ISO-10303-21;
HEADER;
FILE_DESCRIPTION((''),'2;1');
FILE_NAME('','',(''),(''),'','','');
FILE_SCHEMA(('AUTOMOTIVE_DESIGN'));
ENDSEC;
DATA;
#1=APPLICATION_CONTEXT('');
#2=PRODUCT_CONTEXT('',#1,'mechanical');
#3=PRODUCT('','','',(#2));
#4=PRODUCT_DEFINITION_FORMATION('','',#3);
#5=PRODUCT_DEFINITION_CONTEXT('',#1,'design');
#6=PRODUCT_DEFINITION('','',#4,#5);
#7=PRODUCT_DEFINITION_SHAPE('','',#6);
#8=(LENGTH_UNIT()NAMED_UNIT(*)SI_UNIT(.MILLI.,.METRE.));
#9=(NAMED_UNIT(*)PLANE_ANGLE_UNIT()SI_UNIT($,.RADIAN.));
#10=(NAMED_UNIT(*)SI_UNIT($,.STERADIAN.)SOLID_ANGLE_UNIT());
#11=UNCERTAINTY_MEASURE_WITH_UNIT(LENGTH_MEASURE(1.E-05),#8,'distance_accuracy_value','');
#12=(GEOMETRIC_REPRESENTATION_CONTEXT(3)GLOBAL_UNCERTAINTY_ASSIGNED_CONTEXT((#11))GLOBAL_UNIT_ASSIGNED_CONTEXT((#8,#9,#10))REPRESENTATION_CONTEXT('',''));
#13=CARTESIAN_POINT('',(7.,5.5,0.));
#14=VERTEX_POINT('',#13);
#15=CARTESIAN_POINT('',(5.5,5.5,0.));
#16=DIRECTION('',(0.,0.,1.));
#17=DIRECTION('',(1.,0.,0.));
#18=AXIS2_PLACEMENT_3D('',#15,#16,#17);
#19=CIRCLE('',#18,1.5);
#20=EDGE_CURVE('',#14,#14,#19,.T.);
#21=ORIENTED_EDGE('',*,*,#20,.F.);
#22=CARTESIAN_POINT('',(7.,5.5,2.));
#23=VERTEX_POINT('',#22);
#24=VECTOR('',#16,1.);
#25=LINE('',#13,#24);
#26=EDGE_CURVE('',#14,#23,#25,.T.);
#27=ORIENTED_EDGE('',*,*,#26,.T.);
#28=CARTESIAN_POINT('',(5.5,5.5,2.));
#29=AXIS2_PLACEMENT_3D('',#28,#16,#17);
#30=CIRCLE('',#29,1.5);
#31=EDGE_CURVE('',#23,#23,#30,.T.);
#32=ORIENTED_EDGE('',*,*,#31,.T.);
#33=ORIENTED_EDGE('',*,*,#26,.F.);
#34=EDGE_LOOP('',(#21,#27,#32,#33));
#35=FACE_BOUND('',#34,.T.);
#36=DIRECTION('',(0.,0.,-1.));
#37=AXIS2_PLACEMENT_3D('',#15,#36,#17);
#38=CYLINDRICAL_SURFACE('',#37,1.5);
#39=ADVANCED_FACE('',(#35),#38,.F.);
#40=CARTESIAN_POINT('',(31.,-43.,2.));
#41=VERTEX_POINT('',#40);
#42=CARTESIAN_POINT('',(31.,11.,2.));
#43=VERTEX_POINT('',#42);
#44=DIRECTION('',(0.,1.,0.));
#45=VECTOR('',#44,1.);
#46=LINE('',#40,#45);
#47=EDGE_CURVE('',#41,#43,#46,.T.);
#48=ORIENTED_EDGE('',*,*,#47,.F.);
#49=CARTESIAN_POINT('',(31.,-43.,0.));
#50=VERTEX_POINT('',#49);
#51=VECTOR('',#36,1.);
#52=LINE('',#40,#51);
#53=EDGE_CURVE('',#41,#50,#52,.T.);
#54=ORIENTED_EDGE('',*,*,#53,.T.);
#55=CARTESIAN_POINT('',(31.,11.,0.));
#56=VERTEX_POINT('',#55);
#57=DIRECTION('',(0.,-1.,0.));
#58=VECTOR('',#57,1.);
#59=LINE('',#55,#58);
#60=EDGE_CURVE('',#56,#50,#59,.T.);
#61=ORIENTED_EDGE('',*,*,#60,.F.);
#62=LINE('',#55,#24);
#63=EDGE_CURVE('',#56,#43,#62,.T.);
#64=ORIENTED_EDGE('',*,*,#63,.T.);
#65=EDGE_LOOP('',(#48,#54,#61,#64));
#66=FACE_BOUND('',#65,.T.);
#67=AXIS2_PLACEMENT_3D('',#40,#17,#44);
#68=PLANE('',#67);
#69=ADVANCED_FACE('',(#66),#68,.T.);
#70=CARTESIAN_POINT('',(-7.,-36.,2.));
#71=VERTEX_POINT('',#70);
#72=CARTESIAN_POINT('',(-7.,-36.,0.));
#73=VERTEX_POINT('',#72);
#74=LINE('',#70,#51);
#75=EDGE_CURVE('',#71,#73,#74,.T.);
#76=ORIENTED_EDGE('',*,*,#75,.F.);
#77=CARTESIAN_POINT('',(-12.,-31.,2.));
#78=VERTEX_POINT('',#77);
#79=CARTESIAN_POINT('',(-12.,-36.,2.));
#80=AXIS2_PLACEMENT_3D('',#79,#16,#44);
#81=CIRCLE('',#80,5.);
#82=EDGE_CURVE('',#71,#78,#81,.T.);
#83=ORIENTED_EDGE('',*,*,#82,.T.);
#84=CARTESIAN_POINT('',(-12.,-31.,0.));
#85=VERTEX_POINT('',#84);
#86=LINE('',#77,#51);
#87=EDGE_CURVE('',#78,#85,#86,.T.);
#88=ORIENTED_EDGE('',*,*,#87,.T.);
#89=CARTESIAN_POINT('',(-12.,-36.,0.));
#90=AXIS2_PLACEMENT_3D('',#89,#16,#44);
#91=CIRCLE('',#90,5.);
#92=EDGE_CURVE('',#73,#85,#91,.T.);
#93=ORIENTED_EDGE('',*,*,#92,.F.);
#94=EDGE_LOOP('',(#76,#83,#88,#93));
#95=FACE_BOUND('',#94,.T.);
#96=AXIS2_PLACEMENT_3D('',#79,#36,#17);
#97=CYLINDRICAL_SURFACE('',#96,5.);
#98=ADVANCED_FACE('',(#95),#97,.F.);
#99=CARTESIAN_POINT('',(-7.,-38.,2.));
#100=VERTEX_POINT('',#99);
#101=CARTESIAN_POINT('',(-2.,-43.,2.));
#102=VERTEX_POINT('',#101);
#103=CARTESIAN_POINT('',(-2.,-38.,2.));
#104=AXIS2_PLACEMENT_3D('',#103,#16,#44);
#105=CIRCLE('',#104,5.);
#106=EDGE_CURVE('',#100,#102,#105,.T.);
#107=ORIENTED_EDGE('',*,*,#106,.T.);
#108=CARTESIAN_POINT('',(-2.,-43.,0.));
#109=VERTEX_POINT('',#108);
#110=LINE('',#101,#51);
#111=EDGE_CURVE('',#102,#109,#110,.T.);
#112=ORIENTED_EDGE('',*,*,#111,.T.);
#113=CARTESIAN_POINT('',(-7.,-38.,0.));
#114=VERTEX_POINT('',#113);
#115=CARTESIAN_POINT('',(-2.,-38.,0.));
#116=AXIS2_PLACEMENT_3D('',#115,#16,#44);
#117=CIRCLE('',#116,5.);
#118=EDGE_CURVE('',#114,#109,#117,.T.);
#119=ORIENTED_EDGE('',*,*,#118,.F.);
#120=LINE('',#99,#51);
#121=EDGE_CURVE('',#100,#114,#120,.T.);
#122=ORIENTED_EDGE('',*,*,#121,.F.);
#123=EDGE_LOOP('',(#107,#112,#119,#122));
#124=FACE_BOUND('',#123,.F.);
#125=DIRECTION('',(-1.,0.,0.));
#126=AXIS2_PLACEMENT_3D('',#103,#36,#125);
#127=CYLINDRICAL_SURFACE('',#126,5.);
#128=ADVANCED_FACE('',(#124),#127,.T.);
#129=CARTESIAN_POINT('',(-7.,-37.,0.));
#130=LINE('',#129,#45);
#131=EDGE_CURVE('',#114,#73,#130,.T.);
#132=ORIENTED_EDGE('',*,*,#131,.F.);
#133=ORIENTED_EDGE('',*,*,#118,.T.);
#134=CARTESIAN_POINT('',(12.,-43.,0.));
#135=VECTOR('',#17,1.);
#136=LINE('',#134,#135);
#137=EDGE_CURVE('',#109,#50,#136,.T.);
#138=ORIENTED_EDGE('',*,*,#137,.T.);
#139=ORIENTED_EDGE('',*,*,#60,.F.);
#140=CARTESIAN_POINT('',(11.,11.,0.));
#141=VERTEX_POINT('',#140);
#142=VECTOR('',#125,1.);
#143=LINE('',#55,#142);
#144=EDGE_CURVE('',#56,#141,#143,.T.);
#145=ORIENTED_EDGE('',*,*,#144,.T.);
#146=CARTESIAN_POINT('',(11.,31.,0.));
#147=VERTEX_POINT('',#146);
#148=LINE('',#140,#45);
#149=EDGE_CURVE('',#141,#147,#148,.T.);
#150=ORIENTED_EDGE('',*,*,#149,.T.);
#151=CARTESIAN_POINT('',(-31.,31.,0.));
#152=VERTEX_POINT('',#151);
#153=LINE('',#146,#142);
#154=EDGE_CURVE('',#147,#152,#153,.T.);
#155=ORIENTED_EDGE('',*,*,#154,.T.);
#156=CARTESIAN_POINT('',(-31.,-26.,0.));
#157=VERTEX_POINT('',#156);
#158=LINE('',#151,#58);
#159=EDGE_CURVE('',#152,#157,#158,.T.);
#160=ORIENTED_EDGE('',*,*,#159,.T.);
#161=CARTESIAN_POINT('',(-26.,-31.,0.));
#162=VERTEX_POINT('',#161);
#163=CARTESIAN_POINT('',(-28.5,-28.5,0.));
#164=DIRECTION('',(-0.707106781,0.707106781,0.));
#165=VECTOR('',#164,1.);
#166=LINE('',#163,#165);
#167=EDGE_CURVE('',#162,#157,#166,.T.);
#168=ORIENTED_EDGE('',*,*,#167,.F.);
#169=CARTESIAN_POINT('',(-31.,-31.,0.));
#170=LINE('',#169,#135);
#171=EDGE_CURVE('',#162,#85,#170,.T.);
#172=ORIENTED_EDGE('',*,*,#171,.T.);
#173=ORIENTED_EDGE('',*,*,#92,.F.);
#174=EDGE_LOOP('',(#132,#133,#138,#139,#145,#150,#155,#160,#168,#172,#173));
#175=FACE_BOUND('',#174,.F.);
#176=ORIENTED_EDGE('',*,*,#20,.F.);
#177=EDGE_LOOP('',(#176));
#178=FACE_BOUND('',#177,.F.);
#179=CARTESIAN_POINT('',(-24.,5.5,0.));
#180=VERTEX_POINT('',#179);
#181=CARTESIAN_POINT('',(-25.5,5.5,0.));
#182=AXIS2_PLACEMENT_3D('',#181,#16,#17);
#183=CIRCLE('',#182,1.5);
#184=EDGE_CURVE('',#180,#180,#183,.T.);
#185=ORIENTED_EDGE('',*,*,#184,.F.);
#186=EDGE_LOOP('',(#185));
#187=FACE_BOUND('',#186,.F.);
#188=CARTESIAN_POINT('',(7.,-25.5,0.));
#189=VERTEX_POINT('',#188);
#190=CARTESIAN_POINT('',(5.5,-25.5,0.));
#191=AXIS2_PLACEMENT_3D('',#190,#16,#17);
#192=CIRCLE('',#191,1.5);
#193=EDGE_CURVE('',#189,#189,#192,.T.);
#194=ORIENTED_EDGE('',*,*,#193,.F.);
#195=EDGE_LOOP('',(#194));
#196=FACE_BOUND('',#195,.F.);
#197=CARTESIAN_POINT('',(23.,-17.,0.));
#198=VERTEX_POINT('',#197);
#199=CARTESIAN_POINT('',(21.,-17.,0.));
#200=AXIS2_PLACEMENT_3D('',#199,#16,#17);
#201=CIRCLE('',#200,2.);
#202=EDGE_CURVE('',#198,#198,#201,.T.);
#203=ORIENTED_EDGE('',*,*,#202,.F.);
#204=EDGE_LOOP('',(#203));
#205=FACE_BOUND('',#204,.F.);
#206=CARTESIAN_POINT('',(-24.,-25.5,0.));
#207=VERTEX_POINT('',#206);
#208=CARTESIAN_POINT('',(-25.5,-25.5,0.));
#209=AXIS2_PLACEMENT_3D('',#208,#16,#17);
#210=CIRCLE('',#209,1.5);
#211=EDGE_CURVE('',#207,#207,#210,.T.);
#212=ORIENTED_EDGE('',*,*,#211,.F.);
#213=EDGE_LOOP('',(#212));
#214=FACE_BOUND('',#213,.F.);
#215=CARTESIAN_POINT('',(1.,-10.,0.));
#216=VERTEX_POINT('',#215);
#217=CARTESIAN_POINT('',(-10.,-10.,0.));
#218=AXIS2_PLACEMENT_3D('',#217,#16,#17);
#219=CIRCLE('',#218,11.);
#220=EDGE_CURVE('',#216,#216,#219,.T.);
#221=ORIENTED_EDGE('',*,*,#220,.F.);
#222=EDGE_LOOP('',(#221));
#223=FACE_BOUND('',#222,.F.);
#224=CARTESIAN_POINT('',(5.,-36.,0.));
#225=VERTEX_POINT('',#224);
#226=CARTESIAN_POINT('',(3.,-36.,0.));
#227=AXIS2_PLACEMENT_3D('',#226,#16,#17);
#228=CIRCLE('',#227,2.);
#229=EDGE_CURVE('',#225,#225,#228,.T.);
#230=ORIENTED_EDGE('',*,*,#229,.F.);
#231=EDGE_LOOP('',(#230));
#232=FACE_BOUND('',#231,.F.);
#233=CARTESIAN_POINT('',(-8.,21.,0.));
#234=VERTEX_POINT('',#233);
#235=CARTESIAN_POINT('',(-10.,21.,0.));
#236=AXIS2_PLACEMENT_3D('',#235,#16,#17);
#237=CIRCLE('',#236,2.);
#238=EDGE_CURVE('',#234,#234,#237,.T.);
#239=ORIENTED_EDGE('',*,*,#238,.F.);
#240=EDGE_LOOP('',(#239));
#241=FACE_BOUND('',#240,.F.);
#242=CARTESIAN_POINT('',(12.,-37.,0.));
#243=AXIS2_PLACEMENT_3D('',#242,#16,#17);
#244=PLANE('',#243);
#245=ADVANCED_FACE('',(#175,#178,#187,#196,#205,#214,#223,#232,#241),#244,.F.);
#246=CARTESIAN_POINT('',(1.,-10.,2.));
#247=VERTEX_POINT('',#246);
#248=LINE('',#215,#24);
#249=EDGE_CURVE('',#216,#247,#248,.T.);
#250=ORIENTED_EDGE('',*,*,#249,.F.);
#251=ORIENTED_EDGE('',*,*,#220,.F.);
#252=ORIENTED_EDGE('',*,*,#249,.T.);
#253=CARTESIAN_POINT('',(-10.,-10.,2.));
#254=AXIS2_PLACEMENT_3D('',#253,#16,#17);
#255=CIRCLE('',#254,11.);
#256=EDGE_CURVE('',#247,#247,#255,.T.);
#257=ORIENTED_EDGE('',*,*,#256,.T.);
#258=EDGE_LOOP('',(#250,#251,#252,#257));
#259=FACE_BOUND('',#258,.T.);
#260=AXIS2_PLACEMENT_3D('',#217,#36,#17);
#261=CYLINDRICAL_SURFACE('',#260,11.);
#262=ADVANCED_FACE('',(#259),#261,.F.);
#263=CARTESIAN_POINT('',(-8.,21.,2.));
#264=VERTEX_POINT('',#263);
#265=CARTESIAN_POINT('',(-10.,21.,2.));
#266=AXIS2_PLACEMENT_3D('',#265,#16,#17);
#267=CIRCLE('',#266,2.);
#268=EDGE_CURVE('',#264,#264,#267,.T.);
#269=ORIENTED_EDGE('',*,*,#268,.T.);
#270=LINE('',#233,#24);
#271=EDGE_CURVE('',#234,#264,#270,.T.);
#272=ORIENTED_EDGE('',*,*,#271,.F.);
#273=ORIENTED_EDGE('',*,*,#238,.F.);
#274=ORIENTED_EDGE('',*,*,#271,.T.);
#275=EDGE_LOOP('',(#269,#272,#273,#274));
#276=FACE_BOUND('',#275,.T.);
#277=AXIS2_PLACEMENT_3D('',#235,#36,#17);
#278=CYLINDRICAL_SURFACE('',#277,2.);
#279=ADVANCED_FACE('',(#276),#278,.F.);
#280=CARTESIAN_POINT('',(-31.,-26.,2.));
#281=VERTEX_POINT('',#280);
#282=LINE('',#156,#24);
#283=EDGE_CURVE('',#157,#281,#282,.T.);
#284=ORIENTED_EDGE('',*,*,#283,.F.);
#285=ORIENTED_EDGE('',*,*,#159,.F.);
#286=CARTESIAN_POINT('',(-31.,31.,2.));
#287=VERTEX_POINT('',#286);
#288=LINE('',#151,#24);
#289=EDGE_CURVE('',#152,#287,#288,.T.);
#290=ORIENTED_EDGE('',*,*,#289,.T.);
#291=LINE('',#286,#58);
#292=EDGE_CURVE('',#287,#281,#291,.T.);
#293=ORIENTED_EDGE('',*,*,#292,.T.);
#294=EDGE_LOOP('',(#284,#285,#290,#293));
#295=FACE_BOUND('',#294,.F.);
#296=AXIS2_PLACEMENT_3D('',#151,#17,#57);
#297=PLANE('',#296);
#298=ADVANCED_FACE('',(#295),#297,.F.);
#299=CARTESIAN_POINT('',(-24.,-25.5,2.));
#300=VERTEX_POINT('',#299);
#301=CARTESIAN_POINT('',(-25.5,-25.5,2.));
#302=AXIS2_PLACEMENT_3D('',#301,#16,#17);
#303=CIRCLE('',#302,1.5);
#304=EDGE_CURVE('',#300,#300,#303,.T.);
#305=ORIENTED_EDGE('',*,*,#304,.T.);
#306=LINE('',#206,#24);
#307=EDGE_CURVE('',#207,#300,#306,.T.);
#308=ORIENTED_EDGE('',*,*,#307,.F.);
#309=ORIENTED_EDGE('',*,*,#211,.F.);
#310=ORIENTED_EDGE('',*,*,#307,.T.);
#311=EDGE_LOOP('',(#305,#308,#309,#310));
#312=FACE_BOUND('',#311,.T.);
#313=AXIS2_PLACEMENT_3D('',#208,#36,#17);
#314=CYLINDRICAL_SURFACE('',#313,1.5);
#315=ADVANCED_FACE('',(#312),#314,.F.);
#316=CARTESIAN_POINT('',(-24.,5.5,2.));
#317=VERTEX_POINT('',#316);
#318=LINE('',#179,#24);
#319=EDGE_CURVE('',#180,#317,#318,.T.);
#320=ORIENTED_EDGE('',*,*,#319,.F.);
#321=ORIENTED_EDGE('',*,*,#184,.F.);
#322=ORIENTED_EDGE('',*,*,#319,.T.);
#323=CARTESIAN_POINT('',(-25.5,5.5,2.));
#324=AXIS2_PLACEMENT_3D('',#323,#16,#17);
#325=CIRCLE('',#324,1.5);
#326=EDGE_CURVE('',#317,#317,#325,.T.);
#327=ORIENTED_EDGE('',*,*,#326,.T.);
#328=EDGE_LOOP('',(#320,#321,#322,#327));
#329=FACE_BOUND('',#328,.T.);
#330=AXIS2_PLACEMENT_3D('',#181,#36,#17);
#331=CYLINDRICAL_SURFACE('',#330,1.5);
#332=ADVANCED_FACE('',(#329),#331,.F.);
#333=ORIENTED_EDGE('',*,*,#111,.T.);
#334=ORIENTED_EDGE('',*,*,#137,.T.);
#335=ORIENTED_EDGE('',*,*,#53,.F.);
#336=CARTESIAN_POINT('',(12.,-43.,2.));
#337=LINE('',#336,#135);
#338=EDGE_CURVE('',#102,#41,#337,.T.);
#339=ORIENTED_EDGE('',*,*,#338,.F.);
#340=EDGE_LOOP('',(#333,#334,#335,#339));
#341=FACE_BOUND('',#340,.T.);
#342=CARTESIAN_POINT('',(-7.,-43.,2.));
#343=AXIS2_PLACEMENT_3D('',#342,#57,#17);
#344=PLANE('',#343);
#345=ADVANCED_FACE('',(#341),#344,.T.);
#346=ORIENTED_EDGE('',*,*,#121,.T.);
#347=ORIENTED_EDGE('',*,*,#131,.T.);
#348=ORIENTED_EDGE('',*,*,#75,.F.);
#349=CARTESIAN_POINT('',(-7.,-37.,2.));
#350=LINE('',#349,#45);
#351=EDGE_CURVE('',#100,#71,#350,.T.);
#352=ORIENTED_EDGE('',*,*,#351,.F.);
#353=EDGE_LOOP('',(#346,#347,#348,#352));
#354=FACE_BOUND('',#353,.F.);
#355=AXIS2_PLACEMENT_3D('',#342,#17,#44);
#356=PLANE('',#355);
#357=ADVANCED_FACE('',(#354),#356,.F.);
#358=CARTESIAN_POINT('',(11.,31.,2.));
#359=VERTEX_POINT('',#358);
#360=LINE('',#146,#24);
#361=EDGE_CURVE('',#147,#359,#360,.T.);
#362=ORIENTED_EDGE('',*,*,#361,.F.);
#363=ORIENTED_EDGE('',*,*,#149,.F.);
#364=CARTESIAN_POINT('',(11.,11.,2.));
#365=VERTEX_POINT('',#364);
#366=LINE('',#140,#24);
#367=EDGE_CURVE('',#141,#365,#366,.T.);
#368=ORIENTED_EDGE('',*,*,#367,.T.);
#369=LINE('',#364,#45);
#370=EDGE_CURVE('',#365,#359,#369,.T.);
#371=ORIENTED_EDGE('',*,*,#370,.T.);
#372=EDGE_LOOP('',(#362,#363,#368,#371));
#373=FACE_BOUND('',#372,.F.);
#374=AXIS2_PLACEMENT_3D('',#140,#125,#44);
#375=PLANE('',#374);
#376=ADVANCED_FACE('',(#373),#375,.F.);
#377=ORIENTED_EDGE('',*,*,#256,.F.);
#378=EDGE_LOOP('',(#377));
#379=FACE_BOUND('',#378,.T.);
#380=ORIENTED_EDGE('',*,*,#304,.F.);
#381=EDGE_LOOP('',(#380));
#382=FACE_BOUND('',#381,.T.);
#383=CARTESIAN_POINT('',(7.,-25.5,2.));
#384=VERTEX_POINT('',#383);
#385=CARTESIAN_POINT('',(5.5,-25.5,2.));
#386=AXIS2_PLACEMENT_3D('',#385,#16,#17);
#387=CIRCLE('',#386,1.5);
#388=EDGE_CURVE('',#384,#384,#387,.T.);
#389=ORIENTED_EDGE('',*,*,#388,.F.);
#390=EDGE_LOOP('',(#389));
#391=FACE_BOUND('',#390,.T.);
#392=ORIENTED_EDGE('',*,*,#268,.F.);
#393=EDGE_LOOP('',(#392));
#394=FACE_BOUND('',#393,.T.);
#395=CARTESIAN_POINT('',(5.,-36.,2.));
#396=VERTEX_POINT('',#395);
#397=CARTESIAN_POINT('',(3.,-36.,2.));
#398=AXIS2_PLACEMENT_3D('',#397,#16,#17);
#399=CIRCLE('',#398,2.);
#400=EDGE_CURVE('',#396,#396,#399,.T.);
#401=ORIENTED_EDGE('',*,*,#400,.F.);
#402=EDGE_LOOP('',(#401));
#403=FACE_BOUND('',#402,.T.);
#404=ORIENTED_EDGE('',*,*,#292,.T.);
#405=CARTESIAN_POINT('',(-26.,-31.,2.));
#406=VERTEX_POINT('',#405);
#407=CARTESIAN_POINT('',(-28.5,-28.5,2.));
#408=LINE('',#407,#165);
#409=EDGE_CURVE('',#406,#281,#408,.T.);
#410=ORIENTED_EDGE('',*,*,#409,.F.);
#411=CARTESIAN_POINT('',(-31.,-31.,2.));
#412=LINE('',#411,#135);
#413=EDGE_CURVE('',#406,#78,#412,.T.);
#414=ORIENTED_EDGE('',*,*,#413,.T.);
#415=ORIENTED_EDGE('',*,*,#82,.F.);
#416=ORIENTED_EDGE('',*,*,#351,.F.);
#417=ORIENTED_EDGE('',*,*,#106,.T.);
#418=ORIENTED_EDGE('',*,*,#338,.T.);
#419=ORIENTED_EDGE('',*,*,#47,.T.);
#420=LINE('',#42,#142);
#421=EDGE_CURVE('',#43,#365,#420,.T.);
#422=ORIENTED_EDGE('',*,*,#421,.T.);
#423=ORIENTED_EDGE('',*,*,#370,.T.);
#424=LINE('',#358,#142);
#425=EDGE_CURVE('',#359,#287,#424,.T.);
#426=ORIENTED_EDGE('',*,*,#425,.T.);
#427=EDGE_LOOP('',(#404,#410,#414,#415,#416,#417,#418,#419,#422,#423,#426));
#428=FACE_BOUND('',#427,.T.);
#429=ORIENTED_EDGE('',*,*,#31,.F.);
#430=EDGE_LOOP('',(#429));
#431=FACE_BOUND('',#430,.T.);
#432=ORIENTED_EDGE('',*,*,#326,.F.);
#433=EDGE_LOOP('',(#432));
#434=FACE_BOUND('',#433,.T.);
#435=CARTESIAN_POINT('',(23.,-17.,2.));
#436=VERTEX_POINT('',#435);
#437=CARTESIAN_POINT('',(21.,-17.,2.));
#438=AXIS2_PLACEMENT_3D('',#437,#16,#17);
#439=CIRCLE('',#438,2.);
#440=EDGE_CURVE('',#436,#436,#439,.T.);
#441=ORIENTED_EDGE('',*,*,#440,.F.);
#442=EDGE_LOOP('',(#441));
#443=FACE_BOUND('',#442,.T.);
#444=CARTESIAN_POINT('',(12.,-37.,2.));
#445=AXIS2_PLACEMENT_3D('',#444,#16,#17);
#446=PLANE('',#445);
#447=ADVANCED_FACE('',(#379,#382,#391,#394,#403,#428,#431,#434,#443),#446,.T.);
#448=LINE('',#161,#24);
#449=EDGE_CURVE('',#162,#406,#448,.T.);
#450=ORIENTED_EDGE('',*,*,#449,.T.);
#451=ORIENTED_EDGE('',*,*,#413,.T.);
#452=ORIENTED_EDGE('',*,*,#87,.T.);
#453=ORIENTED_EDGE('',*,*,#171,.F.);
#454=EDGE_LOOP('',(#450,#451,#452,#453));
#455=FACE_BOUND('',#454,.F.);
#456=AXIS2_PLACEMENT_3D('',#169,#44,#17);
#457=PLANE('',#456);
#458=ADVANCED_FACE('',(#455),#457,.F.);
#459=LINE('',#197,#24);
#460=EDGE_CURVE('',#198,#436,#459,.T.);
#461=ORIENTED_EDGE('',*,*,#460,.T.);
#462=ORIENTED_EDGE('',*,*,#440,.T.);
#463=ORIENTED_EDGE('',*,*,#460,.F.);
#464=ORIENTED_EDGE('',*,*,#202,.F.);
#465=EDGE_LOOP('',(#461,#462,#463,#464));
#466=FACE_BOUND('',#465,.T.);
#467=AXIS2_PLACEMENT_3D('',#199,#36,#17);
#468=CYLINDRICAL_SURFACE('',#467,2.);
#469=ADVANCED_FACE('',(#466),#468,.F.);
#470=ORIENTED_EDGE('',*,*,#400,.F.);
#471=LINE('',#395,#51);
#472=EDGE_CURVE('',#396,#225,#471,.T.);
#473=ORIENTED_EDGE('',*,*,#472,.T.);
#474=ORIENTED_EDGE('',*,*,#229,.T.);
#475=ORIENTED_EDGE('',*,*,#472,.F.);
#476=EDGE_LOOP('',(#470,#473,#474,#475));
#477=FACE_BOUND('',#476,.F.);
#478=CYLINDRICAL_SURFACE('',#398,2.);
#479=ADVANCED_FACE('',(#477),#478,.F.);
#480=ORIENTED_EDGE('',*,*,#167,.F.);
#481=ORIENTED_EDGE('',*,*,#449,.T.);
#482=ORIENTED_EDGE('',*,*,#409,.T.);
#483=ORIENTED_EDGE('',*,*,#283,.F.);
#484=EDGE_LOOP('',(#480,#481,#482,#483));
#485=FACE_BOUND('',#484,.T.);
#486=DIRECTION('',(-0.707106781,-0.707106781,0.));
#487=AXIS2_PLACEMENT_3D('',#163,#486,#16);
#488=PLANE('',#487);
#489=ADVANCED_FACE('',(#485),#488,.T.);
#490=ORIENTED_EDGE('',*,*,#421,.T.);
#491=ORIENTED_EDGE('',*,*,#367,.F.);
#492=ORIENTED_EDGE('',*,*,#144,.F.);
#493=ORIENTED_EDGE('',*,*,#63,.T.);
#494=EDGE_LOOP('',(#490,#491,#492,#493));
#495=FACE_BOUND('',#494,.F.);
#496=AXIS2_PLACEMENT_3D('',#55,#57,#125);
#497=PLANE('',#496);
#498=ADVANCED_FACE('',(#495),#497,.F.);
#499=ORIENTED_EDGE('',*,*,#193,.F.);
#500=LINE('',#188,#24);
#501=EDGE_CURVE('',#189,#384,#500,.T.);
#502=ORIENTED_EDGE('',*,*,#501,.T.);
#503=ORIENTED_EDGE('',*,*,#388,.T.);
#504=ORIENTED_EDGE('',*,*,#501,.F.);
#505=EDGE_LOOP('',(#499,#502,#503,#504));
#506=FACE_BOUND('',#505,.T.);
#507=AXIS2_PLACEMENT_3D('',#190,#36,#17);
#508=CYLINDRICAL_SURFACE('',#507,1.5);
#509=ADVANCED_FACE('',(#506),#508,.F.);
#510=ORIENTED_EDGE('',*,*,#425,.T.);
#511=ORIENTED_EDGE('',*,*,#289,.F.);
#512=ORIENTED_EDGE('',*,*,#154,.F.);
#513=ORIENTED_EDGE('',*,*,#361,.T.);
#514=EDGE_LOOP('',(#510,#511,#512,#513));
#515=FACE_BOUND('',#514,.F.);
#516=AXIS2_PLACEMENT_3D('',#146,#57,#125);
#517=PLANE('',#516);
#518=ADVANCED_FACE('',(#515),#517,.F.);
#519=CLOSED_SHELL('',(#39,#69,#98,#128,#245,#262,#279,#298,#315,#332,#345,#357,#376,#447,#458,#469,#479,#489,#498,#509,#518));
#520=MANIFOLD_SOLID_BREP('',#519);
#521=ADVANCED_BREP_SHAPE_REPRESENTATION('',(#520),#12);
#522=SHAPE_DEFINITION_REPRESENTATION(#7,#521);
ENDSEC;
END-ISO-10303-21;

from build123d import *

# Parameters (mm, degrees)
F0_R     = 1.5
F0_R_2   = 11
F0_R_3   = 2
F1_DEPTH = 2
F2_SIZE  = 5
F3_W     = 38
F3_H     = 12
F4_DEPTH = 2
F5_R     = 2
F6_DEPTH = 25
F7_R     = 5


with BuildPart() as f1:
    # F0 (on Top) → F1 (new body)
    with BuildSketch(Plane.XY):
        Polygon((-31, -31), (31, -31), (31, 11), (11, 11), (11, 31), (-31, 31), align=None)
        with Locations((-25.5, -25.5)):
            Circle(F0_R, mode=Mode.SUBTRACT)
        with Locations((-10, -10)):
            Circle(F0_R_2, mode=Mode.SUBTRACT)
        with Locations((5.5, -25.5)):
            Circle(F0_R, mode=Mode.SUBTRACT)
        with Locations((21, -17)):
            Circle(F0_R_3, mode=Mode.SUBTRACT)
        with Locations((-25.5, 5.5)):
            Circle(F0_R, mode=Mode.SUBTRACT)
        with Locations((-10, 21)):
            Circle(F0_R_3, mode=Mode.SUBTRACT)
        with Locations((5.5, 5.5)):
            Circle(F0_R, mode=Mode.SUBTRACT)
    extrude(amount=F1_DEPTH)

    # F2
    f2_edges = [f1.edges().sort_by_distance(p)[0] for p in [
        (-31, -31, 1),
    ]]
    chamfer(f2_edges, length=F2_SIZE)

    # F3 (on face) → F4 (join)
    with BuildSketch(Plane.XY.offset(2)):
        with Locations((12, -37)):
            Rectangle(F3_W, F3_H)
    extrude(amount=-F4_DEPTH)

    # F5 (on face) → F6 (cut)
    with BuildSketch(Plane.XY.offset(2)):
        with Locations((3, -36)):
            Circle(F5_R)
    extrude(amount=-F6_DEPTH, mode=Mode.SUBTRACT)

    # F7
    f7_edges = [f1.edges().sort_by_distance(p)[0] for p in [
        (-7, -43, 1),
        (-7, -31, 1),
    ]]
    fillet(f7_edges, radius=F7_R)


solid = f1.part
